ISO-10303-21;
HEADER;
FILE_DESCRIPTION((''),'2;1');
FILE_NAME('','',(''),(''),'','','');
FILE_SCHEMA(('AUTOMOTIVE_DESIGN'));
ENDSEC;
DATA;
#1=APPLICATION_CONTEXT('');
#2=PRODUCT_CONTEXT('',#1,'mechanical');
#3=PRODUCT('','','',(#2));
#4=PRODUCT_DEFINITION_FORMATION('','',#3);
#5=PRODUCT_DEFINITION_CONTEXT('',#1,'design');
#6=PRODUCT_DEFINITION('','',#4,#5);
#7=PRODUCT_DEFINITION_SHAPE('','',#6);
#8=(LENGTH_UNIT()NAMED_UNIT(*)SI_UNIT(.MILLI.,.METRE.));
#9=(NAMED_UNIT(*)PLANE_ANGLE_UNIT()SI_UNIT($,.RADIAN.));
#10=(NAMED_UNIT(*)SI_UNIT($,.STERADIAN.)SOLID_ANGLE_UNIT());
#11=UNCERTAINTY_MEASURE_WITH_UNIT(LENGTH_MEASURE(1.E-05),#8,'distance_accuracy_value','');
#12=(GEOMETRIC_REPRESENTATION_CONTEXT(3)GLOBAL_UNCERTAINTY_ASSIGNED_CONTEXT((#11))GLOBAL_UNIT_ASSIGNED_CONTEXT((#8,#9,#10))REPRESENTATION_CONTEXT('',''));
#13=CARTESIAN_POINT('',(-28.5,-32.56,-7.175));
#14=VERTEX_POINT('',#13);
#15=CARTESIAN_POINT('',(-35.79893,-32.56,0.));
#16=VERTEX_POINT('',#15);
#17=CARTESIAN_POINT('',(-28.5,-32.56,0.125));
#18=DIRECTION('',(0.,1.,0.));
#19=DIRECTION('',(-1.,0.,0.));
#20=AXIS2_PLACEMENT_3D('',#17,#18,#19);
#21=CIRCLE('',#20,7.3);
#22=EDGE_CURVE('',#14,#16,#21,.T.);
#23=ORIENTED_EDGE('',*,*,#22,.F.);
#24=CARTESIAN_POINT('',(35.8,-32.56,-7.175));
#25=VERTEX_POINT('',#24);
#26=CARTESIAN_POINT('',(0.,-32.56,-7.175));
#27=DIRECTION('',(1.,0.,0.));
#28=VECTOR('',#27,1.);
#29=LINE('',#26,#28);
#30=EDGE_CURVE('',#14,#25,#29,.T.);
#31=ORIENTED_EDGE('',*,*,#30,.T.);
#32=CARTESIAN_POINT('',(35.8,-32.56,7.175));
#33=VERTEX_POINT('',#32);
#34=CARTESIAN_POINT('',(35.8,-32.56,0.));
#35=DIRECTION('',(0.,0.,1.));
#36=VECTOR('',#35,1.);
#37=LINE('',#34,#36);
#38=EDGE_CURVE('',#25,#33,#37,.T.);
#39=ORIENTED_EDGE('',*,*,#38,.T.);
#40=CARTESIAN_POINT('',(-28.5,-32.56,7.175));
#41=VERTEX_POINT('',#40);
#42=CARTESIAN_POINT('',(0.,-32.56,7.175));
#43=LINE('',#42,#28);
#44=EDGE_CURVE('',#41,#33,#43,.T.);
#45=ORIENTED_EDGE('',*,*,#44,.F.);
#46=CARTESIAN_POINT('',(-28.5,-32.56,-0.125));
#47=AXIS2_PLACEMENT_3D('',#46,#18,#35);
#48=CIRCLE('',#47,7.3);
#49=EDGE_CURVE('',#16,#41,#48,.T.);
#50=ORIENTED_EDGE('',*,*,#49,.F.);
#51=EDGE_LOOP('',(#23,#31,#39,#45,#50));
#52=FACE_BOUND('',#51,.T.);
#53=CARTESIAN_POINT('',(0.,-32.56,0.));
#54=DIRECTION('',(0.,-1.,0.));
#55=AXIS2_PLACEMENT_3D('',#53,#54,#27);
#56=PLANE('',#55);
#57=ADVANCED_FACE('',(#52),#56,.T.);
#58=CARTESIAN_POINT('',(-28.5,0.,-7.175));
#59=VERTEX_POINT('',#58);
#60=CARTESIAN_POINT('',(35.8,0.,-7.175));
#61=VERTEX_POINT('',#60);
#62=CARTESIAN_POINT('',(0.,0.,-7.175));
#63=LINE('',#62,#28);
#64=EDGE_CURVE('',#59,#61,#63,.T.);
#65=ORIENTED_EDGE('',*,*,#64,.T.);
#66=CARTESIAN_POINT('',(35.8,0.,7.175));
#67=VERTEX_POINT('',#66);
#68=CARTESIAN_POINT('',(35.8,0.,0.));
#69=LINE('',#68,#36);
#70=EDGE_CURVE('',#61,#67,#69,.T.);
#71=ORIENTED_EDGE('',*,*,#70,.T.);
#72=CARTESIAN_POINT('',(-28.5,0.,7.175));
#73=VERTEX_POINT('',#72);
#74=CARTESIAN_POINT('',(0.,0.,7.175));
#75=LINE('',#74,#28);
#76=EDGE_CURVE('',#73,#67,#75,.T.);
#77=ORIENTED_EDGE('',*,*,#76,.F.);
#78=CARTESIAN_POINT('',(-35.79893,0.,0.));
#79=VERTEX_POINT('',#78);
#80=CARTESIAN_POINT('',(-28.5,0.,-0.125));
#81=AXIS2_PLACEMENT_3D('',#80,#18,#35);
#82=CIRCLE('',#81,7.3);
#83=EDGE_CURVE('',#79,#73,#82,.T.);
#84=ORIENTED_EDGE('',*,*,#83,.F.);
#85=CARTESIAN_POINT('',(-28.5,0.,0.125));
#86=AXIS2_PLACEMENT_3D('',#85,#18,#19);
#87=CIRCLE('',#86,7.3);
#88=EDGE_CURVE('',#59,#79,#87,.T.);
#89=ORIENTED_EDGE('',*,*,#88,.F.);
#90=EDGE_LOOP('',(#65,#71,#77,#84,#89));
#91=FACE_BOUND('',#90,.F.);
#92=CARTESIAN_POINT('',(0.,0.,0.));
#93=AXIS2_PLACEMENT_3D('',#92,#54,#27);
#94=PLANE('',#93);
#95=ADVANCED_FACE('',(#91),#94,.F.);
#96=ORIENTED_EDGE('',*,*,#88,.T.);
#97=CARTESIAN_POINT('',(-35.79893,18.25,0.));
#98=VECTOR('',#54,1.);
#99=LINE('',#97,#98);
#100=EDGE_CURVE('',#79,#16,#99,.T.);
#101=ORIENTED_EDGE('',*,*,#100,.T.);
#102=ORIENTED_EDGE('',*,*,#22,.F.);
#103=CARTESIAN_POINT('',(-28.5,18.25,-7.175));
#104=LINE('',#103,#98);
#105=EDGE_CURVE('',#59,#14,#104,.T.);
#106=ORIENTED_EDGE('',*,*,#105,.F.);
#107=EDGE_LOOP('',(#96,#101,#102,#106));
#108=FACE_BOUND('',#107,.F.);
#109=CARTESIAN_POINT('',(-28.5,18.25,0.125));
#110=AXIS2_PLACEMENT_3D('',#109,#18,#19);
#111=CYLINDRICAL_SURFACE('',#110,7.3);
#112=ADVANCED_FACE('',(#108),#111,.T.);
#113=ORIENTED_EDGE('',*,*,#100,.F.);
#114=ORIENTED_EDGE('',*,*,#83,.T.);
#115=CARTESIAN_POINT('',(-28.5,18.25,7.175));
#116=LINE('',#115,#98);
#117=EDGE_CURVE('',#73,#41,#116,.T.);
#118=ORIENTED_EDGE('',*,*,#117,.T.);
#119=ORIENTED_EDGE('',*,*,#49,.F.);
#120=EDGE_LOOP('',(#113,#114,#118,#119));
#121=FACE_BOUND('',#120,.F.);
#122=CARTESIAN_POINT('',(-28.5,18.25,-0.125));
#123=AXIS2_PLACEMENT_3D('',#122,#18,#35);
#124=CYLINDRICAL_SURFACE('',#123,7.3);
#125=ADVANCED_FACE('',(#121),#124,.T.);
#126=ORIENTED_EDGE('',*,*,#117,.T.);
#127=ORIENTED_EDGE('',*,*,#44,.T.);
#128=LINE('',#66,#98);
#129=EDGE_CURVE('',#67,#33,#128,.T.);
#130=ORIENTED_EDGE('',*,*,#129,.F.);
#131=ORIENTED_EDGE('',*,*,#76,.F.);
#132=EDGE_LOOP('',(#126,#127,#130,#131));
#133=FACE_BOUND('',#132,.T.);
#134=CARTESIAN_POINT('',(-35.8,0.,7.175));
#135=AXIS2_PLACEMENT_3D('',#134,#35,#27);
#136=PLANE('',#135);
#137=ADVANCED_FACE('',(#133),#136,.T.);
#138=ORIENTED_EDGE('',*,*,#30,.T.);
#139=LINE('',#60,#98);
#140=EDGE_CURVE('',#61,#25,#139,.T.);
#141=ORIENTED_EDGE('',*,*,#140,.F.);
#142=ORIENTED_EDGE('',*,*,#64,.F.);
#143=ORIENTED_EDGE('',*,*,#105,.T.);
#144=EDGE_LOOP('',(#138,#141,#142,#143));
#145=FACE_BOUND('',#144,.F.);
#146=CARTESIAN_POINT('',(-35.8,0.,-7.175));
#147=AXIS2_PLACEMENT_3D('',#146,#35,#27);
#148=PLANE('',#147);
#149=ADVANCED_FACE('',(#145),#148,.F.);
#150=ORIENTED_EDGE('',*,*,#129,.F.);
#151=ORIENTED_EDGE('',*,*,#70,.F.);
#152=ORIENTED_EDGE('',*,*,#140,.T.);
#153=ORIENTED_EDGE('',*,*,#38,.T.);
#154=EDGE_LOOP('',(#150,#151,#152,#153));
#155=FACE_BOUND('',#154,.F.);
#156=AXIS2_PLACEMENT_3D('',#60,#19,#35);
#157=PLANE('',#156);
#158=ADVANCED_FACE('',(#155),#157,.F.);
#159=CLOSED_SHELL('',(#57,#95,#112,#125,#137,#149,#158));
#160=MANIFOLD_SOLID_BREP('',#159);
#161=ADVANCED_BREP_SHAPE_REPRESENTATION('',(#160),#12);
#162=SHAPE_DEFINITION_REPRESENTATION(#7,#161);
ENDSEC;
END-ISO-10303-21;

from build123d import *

# Parameters (mm, degrees)
F0_W        = 71.6
F0_H        = 14.35
F1_DEPTH    = 32.56
F2_T1_DEPTH = 69.06


# Not quite as in the source:
# - a fillet or chamfer that OpenCascade refuses, or shapes differently, is made with other operations: its cross-section is extruded or revolved along the edge and cut away or added


with BuildPart() as f1:
    # F0 (on Front) → F1 (new body)
    with BuildSketch(Plane.XZ):
        Rectangle(F0_W, F0_H)
    extrude(amount=F1_DEPTH)

    # F2: fillet of radius 7.3 on 2 edges, made by hand

    # F2_s2 → F2_t1 (cut)
    with BuildSketch(Plane.XZ.offset(-18.25)):
        with BuildLine():
            ThreePointArc((-28.5, 7.175), (-33.6618795027, 5.0368795027), (-35.8, -0.125))
            Line((-35.8, -0.125), (-35.8, 7.175))
            Line((-35.8, 7.175), (-28.5, 7.175))
        make_face()
        with BuildLine():
            ThreePointArc((-35.8, 0.125), (-33.6618795027, -5.0368795027), (-28.5, -7.175))
            Line((-28.5, -7.175), (-35.8, -7.175))
            Line((-35.8, -7.175), (-35.8, 0.125))
        make_face()
    extrude(amount=F2_T1_DEPTH, mode=Mode.SUBTRACT)


solid = f1.part
